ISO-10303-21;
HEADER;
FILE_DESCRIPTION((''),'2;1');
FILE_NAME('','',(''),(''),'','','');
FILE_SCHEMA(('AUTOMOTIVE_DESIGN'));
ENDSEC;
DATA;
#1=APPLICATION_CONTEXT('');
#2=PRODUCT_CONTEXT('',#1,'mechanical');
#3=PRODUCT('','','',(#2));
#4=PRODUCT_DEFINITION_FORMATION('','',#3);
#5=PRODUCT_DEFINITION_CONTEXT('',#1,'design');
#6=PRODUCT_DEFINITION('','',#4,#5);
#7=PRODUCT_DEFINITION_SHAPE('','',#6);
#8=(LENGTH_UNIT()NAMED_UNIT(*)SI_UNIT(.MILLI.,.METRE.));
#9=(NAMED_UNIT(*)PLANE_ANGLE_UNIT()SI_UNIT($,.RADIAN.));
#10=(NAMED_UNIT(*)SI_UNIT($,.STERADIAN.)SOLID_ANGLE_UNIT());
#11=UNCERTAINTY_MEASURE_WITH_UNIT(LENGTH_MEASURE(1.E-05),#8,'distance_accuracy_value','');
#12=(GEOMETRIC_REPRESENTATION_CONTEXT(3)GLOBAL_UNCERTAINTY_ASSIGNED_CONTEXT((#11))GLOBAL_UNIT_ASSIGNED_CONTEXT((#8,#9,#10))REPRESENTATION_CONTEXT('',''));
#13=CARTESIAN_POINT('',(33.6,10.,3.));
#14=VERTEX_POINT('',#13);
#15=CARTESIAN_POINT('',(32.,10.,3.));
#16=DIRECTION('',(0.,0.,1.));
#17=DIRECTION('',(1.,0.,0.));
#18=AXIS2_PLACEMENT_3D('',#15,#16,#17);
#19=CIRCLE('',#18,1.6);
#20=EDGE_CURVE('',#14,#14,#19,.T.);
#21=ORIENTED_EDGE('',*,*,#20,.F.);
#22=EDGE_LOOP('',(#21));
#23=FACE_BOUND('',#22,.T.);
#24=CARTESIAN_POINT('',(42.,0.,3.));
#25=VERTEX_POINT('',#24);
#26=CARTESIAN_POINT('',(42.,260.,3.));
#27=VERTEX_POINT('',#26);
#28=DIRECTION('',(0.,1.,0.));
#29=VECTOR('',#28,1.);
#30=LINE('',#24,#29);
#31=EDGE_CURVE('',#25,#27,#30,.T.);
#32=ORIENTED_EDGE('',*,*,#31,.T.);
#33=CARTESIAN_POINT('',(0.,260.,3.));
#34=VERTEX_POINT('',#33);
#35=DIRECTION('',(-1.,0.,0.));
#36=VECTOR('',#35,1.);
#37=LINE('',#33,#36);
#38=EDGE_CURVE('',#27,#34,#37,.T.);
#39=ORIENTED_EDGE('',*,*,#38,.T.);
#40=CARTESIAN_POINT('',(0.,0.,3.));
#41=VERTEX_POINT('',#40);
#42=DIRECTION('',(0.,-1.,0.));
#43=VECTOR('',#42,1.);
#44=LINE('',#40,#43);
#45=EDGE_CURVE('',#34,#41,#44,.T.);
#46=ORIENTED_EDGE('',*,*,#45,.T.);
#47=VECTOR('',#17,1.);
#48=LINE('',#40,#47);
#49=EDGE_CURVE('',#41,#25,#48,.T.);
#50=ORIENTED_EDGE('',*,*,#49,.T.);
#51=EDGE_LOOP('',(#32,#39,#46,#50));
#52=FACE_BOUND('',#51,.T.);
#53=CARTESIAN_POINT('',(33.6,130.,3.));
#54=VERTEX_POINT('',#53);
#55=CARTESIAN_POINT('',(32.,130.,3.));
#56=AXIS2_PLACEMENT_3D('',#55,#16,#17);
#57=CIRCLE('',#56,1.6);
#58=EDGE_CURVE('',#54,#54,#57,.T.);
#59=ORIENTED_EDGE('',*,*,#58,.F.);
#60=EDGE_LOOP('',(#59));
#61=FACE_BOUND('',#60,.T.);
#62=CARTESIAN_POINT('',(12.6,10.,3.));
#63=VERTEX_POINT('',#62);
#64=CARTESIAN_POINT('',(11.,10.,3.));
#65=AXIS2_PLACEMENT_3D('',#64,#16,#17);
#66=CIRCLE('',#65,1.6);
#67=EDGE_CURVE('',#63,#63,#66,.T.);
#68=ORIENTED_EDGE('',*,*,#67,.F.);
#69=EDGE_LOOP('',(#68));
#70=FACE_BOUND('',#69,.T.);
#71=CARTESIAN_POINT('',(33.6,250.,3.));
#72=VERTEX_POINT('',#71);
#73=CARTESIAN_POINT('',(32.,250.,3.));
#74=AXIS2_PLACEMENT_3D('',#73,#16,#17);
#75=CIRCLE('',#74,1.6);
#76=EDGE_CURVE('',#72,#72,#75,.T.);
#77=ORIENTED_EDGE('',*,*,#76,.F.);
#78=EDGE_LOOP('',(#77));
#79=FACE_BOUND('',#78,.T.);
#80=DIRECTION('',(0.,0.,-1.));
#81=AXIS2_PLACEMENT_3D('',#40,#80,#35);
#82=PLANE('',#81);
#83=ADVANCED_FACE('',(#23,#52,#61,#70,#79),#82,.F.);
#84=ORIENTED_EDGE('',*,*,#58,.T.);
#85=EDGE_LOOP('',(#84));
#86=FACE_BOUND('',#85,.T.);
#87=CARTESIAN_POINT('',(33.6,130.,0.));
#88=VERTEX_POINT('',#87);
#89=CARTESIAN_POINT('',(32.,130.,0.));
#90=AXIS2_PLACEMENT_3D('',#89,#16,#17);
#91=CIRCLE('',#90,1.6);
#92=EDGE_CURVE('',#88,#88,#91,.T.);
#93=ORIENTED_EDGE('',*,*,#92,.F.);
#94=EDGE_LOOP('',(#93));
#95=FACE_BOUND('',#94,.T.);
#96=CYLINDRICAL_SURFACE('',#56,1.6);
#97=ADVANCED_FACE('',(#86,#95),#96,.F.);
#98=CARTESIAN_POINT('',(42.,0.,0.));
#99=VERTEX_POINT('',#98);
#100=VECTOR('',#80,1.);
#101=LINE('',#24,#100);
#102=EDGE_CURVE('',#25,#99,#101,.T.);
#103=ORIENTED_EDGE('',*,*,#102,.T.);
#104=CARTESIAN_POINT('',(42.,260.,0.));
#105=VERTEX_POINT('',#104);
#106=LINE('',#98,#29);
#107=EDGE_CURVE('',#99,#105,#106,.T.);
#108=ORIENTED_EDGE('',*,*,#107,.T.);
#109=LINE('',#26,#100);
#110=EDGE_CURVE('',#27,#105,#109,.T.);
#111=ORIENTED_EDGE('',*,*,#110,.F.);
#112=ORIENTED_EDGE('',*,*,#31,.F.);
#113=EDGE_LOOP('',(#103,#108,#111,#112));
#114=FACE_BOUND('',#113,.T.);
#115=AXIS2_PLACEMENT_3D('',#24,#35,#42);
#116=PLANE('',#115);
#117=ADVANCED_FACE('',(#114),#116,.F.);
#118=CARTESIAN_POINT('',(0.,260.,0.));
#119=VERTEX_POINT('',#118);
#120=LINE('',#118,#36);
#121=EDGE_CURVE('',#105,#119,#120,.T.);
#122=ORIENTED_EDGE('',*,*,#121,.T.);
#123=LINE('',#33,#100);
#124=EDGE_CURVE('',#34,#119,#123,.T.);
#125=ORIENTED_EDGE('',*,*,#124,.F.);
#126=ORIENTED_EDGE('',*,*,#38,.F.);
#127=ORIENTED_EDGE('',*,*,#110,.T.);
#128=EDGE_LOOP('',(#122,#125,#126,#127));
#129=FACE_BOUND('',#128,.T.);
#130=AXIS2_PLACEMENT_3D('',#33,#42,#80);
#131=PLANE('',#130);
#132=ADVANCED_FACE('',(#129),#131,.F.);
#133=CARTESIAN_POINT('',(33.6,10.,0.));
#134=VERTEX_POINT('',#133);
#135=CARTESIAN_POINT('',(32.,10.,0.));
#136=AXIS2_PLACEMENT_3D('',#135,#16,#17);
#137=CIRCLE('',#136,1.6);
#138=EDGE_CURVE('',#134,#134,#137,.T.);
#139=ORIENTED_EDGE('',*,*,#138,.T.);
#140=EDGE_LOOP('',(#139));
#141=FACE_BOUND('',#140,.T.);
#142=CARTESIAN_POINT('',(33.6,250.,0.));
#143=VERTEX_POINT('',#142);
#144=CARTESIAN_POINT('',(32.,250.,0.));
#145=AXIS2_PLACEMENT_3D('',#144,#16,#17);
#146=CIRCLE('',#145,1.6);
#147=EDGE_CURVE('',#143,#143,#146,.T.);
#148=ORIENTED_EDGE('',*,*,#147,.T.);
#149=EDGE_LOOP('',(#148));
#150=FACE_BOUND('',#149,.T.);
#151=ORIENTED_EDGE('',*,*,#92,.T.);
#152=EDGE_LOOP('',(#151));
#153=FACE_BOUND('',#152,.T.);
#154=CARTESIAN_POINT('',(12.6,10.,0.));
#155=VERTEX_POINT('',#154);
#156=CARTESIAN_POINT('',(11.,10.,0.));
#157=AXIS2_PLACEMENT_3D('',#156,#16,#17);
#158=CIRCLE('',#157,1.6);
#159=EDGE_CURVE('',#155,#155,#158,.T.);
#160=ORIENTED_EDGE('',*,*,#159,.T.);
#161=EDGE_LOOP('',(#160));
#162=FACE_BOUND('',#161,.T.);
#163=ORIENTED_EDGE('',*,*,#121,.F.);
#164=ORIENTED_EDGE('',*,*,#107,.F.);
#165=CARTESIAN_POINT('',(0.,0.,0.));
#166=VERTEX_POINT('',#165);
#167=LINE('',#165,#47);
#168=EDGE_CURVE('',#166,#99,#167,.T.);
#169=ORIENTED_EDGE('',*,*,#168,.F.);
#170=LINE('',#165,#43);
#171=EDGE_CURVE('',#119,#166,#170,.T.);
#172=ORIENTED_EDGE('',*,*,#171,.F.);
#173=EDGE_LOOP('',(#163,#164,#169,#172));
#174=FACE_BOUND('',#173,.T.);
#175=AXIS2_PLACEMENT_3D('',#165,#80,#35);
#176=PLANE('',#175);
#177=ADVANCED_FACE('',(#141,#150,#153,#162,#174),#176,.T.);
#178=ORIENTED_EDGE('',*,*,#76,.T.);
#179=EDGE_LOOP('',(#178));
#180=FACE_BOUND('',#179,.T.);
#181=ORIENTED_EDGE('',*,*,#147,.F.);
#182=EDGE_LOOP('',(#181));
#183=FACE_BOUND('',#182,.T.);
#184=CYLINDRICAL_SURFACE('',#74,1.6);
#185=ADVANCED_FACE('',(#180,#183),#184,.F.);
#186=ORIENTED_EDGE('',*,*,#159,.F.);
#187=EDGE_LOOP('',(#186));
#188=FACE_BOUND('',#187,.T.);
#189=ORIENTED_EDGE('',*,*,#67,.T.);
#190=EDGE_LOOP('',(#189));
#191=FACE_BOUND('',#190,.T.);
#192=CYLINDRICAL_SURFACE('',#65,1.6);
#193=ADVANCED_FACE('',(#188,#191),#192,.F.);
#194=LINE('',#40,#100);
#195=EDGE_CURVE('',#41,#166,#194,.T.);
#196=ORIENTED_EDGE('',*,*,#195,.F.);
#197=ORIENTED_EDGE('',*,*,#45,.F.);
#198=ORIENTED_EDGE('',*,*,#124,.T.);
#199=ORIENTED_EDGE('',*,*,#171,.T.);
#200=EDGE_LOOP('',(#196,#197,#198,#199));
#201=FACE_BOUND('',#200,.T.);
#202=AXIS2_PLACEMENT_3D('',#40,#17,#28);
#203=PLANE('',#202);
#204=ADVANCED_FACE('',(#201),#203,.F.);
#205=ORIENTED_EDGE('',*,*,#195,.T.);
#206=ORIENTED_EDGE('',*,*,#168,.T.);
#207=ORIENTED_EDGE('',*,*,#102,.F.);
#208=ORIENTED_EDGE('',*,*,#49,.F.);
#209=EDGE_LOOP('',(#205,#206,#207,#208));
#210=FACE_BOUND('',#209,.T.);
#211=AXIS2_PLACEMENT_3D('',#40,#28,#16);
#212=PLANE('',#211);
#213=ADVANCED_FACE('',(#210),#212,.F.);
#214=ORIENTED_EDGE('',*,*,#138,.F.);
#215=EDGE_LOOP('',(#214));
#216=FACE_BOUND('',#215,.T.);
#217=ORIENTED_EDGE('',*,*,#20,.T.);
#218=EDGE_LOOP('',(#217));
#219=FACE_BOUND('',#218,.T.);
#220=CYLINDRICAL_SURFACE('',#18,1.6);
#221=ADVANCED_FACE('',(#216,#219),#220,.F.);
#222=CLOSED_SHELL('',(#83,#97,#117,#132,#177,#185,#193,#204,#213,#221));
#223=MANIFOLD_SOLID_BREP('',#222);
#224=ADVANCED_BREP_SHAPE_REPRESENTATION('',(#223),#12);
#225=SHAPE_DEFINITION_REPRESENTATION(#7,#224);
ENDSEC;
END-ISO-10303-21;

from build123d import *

# Parameters (mm, degrees)
SKETCH1_W                    = 42
SKETCH1_H                    = 260
BOSS_EXTRUDE1_DEPTH          = 3
M3_CLEARANCE_HOLE1_OUTLINE_R = 1.6
M3_CLEARANCE_HOLE1_DEPTH     = 3


# Read off the part's stored shape, not the designer's step: M3 Clearance Hole1
with BuildPart() as part:
    # Sketch1 → Boss-Extrude1 (new body)
    with BuildSketch(Plane.XY):
        with Locations((21, 130)):
            Rectangle(SKETCH1_W, SKETCH1_H)
    extrude(amount=BOSS_EXTRUDE1_DEPTH)

    # M3 Clearance Hole1 outline → M3 Clearance Hole1 (cut)
    with BuildSketch(Plane.XY):
        with Locations((32, 130)):
            Circle(M3_CLEARANCE_HOLE1_OUTLINE_R)
        with Locations((32, 10)):
            Circle(M3_CLEARANCE_HOLE1_OUTLINE_R)
        with Locations((32, 250)):
            Circle(M3_CLEARANCE_HOLE1_OUTLINE_R)
        with Locations((11, 10)):
            Circle(M3_CLEARANCE_HOLE1_OUTLINE_R)
    extrude(amount=M3_CLEARANCE_HOLE1_DEPTH, mode=Mode.SUBTRACT)


solid = part.part
